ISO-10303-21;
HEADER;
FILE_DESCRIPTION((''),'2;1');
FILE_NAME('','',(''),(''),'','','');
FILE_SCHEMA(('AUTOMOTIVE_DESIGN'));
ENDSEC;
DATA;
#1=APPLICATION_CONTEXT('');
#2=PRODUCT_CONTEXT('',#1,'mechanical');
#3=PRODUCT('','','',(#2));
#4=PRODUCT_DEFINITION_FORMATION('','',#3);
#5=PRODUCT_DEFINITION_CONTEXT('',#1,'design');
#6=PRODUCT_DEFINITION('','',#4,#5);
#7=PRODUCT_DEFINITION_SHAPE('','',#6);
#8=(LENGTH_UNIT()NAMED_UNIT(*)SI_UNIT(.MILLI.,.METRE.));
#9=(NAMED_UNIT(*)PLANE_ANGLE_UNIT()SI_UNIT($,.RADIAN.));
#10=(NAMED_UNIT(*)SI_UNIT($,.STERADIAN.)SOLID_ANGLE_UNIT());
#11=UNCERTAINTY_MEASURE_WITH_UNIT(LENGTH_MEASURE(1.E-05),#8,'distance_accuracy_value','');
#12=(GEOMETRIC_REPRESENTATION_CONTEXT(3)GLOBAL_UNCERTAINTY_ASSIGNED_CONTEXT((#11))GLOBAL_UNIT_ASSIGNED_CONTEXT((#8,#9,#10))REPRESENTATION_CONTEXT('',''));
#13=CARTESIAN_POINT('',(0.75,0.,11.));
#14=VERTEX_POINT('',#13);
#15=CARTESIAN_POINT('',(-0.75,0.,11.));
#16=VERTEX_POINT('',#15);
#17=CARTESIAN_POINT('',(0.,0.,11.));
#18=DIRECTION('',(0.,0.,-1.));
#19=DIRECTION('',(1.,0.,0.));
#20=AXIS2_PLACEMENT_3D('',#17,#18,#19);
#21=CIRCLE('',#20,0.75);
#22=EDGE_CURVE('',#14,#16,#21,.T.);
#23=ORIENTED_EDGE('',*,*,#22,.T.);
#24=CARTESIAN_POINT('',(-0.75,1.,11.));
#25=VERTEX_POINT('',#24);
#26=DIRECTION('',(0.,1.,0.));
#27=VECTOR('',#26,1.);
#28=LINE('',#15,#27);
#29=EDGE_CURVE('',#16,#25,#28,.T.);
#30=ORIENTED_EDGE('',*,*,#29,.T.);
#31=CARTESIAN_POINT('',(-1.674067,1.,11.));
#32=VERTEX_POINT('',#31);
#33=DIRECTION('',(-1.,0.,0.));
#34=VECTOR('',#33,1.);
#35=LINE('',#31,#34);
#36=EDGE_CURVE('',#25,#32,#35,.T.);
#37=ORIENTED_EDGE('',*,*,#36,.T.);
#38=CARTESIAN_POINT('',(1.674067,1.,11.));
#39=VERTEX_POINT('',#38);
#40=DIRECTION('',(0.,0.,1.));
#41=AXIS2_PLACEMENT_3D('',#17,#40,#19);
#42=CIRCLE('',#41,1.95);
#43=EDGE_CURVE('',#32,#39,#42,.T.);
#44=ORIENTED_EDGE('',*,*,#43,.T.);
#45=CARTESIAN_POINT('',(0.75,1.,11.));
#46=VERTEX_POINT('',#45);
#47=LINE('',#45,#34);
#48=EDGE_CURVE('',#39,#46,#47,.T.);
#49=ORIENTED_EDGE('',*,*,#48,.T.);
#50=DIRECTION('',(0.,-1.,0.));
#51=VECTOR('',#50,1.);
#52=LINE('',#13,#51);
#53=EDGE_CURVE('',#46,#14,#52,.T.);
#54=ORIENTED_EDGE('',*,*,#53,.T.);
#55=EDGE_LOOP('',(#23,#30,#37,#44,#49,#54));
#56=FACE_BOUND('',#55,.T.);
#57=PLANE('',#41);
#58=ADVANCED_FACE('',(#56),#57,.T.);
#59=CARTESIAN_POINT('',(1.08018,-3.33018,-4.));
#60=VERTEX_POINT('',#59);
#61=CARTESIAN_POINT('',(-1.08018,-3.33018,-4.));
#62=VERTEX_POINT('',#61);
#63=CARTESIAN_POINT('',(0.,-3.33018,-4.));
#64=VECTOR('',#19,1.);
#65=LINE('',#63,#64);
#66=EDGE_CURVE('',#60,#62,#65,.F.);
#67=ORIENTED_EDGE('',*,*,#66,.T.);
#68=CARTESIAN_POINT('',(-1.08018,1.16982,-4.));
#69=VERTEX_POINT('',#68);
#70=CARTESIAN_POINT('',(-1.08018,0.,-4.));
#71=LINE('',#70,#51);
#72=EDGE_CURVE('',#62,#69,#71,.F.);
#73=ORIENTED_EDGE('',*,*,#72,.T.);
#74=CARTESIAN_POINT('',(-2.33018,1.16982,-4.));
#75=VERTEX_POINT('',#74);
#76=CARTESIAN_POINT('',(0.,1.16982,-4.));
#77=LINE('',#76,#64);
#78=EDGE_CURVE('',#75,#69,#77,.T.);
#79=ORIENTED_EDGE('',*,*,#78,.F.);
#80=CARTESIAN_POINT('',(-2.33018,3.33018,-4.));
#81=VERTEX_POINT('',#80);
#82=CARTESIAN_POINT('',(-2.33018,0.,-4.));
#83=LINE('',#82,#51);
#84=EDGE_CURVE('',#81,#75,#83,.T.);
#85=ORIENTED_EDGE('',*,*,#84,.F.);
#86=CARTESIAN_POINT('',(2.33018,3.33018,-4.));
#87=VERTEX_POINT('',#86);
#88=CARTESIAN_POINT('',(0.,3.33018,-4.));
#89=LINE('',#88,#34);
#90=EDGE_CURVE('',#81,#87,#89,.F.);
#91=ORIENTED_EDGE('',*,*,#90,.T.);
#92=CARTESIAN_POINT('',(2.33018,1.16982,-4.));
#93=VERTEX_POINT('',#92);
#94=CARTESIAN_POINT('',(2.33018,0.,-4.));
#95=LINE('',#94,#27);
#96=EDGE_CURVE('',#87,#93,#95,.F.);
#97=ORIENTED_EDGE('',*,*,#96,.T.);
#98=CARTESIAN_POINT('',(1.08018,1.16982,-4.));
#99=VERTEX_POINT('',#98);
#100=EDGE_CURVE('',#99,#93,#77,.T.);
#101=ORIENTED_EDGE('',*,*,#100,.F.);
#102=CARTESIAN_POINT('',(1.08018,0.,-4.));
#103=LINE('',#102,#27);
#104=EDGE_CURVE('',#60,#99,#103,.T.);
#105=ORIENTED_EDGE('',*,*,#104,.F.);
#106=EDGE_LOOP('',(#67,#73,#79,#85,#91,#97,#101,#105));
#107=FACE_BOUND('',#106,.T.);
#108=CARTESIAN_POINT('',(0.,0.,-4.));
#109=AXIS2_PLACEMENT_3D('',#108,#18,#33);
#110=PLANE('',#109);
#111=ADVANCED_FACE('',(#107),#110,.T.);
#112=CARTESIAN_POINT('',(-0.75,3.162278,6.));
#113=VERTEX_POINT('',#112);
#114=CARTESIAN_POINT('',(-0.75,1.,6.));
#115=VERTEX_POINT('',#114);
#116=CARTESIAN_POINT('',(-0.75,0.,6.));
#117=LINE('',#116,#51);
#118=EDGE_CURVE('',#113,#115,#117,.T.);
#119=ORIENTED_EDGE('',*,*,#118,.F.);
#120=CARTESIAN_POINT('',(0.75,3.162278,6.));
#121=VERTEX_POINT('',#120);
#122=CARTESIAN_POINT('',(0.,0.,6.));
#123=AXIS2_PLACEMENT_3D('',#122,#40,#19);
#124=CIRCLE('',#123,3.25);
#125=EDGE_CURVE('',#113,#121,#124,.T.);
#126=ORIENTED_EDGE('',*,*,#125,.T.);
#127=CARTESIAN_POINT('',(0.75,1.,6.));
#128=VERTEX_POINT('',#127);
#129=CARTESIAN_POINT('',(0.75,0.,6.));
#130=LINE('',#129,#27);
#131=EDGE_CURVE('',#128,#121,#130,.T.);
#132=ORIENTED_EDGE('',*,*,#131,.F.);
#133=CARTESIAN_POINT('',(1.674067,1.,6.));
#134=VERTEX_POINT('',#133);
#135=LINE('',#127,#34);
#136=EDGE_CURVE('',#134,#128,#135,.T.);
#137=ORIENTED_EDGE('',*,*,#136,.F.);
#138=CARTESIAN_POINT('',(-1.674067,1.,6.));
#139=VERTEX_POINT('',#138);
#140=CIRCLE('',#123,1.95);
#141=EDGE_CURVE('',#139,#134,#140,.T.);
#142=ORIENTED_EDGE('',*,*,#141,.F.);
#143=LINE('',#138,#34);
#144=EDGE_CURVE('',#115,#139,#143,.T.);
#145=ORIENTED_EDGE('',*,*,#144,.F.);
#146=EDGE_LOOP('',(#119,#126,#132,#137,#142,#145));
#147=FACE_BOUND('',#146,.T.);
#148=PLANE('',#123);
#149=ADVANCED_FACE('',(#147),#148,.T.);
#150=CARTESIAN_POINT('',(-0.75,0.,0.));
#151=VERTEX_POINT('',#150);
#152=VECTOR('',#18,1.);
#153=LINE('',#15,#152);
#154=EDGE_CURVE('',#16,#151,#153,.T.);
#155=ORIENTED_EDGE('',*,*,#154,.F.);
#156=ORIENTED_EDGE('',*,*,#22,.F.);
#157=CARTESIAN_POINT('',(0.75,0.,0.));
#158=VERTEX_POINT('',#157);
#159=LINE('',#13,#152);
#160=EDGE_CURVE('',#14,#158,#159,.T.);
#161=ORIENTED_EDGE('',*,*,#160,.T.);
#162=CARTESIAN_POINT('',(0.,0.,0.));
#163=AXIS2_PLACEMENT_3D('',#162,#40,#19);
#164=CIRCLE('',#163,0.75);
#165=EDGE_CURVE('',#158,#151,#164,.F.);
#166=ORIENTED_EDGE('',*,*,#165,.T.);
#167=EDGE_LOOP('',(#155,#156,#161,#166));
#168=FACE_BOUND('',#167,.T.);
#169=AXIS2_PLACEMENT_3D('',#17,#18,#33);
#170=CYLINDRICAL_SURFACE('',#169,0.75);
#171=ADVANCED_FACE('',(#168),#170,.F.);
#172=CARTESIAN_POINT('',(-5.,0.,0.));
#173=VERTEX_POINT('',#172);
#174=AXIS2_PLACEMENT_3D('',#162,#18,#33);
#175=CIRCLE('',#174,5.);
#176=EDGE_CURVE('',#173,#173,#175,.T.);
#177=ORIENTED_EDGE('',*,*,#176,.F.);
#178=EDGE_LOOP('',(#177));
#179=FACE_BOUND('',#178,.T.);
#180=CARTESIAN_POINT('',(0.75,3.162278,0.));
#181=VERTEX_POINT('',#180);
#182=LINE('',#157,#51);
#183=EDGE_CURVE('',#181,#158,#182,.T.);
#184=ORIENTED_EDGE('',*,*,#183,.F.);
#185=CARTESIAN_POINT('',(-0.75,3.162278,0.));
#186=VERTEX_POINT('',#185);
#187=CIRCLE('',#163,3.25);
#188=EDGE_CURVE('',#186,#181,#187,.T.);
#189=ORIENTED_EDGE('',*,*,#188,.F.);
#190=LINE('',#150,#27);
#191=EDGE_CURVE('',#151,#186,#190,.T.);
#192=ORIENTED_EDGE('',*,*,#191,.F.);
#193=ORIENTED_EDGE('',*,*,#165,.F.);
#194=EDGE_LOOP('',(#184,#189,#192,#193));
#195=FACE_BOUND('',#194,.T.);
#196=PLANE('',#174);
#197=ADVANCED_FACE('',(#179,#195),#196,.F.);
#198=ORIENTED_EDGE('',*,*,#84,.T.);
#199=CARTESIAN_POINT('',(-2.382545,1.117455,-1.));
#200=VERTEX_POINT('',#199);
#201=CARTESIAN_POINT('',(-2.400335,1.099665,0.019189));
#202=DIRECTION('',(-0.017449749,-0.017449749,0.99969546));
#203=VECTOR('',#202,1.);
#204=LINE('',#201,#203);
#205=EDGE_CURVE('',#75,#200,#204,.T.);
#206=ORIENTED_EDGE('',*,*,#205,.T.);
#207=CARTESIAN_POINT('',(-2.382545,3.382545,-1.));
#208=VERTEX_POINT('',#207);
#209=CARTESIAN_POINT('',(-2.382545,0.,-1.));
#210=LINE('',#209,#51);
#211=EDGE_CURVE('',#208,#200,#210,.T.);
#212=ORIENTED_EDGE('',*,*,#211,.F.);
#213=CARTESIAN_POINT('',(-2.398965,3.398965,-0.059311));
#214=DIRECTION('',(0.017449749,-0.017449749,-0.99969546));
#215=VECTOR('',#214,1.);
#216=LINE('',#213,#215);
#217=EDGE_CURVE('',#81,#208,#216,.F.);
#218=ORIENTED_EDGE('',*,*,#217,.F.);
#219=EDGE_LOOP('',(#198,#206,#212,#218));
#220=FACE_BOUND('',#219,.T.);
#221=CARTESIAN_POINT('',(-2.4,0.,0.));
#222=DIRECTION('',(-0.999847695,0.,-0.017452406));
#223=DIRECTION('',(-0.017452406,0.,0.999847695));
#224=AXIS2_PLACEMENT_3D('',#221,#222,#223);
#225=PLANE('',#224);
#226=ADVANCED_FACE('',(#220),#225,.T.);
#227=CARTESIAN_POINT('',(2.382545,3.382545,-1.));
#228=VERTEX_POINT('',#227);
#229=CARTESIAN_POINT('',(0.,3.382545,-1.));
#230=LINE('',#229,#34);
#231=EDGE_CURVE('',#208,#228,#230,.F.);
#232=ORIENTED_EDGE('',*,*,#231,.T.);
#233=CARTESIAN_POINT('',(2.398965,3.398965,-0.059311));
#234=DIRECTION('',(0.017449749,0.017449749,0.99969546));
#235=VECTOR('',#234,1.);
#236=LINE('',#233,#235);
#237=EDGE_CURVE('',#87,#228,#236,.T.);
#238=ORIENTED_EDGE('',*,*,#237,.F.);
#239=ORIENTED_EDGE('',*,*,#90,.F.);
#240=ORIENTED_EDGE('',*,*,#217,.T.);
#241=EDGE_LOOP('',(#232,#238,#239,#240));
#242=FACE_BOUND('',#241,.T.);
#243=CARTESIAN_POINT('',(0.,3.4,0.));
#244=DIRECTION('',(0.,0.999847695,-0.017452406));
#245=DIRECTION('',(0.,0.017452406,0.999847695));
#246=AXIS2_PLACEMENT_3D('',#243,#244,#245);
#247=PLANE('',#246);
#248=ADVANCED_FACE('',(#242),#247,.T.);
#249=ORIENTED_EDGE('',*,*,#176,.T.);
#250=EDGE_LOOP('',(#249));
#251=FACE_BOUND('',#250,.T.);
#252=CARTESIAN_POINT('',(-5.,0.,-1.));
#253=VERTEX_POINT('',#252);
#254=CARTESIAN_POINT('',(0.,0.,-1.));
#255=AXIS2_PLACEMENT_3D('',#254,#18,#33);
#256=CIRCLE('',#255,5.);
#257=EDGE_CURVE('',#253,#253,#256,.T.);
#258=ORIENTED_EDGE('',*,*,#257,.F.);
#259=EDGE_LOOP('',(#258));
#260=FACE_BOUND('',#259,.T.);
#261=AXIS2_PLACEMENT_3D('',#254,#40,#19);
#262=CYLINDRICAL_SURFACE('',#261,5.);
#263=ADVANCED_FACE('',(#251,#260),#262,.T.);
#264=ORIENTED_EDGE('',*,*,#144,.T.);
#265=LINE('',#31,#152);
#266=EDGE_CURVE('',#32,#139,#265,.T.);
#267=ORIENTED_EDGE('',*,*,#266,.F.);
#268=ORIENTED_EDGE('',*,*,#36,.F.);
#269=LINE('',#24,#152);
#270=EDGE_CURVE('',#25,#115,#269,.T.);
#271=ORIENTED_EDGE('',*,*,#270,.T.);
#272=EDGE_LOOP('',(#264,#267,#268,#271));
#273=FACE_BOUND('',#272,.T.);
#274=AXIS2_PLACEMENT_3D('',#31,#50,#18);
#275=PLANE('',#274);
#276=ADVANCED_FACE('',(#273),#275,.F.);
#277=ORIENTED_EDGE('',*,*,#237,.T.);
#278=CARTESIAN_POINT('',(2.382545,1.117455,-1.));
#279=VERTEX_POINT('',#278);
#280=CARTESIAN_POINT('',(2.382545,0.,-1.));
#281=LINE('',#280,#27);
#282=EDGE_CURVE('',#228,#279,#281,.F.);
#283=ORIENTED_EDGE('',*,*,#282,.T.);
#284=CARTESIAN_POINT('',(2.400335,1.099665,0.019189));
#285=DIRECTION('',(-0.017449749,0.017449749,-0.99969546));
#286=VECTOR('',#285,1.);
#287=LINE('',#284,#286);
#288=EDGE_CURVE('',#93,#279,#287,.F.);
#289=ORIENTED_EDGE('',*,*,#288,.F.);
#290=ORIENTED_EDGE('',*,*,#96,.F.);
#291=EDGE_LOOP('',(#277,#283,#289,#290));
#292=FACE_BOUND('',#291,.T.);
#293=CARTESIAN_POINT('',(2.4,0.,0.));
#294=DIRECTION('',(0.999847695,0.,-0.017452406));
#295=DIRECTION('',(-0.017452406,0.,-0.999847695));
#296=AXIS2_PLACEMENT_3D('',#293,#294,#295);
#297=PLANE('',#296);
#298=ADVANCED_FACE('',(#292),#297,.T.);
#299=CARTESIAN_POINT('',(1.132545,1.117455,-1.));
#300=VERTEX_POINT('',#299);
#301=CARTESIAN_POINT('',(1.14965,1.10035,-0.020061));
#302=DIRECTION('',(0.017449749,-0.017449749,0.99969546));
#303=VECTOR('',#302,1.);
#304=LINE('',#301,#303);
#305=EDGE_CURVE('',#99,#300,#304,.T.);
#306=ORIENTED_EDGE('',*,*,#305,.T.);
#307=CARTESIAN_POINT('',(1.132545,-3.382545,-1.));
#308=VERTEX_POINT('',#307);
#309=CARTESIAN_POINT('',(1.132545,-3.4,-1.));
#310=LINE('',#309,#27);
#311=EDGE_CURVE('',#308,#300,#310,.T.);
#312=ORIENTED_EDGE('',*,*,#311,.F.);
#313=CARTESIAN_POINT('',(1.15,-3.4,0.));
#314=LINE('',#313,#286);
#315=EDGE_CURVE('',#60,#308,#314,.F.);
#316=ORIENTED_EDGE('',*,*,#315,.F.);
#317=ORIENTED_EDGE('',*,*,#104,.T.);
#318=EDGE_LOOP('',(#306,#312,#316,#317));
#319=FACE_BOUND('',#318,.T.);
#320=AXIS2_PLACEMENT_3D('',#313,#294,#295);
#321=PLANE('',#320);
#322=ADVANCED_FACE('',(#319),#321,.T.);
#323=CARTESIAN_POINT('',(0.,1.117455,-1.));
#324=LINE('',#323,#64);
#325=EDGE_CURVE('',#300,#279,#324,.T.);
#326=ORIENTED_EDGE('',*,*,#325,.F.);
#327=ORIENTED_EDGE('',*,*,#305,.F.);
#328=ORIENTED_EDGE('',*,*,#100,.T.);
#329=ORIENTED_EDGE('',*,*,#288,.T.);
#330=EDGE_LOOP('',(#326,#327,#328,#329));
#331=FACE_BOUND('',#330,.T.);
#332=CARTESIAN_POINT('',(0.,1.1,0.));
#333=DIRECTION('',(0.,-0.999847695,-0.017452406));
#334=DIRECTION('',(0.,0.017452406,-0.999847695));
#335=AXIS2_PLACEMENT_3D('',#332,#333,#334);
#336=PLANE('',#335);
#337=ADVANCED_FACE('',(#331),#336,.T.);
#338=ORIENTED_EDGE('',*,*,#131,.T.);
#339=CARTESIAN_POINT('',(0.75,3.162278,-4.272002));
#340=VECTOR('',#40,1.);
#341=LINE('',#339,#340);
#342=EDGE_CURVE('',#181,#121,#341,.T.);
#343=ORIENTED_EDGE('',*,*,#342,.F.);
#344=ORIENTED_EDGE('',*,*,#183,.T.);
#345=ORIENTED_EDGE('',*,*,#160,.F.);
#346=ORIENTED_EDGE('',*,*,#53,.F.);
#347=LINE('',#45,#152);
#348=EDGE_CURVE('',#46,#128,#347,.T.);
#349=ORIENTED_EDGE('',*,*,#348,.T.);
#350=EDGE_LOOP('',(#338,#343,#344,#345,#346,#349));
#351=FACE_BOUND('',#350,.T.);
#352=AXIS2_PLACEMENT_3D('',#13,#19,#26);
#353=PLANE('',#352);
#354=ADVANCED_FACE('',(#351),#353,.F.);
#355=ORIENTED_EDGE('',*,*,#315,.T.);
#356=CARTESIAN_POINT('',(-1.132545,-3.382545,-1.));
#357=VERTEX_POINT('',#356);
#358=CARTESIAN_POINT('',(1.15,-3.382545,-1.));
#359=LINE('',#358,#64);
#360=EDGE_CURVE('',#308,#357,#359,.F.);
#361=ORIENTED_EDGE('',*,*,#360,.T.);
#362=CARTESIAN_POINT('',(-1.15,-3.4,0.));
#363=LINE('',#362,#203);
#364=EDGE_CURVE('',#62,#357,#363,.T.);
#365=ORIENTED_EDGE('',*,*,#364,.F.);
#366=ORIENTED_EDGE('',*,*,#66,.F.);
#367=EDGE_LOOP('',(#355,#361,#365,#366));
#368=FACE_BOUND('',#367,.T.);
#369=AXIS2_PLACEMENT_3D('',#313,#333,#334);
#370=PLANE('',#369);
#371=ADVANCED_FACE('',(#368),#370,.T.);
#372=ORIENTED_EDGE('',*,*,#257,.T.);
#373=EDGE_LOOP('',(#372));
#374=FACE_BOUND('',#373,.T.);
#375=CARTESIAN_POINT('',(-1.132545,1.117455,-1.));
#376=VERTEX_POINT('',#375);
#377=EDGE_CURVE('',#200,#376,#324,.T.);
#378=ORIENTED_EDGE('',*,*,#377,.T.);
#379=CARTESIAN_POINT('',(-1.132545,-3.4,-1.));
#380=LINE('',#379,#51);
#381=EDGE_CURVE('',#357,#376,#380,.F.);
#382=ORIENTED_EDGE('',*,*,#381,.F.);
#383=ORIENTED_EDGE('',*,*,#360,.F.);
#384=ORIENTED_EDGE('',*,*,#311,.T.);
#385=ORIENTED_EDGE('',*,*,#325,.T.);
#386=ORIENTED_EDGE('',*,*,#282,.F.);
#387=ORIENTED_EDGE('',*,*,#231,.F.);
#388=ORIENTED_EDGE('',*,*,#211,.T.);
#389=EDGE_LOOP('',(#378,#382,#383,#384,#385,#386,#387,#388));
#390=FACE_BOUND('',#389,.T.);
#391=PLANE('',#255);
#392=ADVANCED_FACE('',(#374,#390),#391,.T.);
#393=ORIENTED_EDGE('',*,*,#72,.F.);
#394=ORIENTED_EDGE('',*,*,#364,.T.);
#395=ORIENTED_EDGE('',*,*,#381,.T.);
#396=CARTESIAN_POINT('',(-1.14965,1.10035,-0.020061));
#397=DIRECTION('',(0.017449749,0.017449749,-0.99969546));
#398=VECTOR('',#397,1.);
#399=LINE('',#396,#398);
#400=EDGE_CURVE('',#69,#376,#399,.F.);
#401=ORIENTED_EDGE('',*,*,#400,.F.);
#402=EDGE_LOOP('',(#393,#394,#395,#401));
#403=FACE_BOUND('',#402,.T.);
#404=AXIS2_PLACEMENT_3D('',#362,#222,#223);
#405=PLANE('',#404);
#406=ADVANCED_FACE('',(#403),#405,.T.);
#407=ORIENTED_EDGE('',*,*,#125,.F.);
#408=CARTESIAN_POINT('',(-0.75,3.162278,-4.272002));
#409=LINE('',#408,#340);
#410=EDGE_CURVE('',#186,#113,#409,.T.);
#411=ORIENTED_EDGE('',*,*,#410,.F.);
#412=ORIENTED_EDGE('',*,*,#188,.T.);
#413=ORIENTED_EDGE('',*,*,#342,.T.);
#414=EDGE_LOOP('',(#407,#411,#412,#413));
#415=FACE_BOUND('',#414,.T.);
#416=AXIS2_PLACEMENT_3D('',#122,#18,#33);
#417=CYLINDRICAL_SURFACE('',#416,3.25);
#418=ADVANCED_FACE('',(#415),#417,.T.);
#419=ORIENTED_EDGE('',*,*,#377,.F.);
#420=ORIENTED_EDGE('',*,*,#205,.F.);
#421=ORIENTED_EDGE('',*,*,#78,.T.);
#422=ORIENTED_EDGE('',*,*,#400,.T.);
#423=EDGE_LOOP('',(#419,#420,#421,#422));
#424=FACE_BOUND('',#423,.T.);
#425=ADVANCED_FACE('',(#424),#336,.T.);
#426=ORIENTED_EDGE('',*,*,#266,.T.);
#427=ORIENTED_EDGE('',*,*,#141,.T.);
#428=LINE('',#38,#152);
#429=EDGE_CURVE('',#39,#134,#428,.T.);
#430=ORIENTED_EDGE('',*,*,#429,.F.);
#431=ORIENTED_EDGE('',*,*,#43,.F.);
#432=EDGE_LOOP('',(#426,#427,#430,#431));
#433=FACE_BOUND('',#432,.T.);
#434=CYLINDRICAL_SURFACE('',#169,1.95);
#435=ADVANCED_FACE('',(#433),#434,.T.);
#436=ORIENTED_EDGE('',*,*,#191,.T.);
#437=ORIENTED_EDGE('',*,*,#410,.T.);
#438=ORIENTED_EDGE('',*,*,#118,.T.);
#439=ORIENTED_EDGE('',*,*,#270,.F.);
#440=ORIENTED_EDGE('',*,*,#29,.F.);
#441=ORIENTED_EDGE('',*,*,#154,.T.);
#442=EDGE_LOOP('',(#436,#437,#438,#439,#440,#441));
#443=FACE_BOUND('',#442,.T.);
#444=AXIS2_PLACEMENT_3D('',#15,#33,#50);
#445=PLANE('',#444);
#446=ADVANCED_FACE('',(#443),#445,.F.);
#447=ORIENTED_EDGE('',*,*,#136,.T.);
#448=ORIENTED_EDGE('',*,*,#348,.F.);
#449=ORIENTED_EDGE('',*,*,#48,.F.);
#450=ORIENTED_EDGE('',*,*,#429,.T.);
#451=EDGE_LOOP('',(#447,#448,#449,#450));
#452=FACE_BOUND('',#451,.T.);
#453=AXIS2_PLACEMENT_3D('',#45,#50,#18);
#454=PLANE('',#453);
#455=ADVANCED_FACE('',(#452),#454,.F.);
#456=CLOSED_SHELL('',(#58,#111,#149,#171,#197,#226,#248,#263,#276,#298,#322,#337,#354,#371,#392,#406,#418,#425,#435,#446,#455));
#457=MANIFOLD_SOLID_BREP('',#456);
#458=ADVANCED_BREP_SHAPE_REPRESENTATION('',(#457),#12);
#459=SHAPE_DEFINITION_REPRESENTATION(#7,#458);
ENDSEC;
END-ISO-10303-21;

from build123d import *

# Parameters (mm, degrees)
STOCK_5_GEAR_5_OUTPUT_GEAR_32TEETH_0_5M_DEPTH = 6
STOCK_5_GEAR_START                            = 6
STOCK_5_GEAR_5_OUTPUT_GEAR_32TEETH_3_DEPTH    = 5
SKETCH1_W                                     = 2.3
SKETCH1_H                                     = 6.8
BOSS_EXTRUDE1_DEPTH                           = 4
BOSS_EXTRUDE1_DRAFT                           = 1
SKETCH1_W_2                                   = 4.8
SKETCH1_H_2                                   = 2.3
BOSS_EXTRUDE1_PROFILE_2_DEPTH                 = 4
BOSS_EXTRUDE1_PROFILE_2_DRAFT                 = 1
SKETCH2_R                                     = 5
BOSS_EXTRUDE2_DEPTH                           = 1


# Read off the part's stored shape, not the designer's step: Stock-5_Gear 5__Output Gear_32Teeth_0.5Modulus-1
with BuildPart() as part:
    # Stock-5_Gear 5__Output Gear_32Teeth_ 2 → Stock-5_Gear 5__Output Gear_32Teeth_0.5Modulus-1 (new body)
    with BuildSketch(Plane.XY):
        with BuildLine():
            ThreePointArc((-0.75, 3.16227766), (0, -3.25), (0.75, 3.16227766))
            Line((0.75, 3.16227766), (0.75, 0))
            ThreePointArc((0.75, 0), (0, -0.75), (-0.75, 0))
            Line((-0.75, 0), (-0.75, 3.16227766))
        make_face()
    extrude(amount=STOCK_5_GEAR_5_OUTPUT_GEAR_32TEETH_0_5M_DEPTH)

    # Stock-5_Gear 5__Output Gear_32Teeth_ 3 o → Stock-5_Gear 5__Output Gear_32Teeth_ 3 (add)
    with BuildSketch(Plane.XY.offset(STOCK_5_GEAR_START)):
        with BuildLine():
            Line((1.674066904, 1), (0.75, 1))
            Line((0.75, 1), (0.75, 0))
            ThreePointArc((0.75, 0), (0, -0.75), (-0.75, 0))
            Line((-0.75, 0), (-0.75, 1))
            Line((-0.75, 1), (-1.674066904, 1))
            ThreePointArc((-1.674066904, 1), (0, -1.95), (1.674066904, 1))
        make_face()
    extrude(amount=STOCK_5_GEAR_5_OUTPUT_GEAR_32TEETH_3_DEPTH)


with BuildPart() as boss_extrude1_tool:
    # Sketch1 → Boss-Extrude1 (with draft: the straight prism first)
    with BuildSketch(Plane(origin=(0, 0, 0), x_dir=(-1, 0, 0), z_dir=(0, 0, -1))):
        Rectangle(SKETCH1_W, SKETCH1_H)
    extrude(amount=BOSS_EXTRUDE1_DEPTH)
    # Boss-Extrude1: the draft: its side faces are tilted about the plane it starts from
    boss_extrude1_sides = [boss_extrude1_tool.faces().sort_by_distance(p)[0] for p in [
        (0, -3.4, -2),
        (-1.15, 0, -2),
        (0, 3.4, -2),
        (1.15, 0, -2),
    ]]
    draft(boss_extrude1_sides, Plane(origin=(0, 0, 0), x_dir=(-1, 0, 0), z_dir=(0, 0, -1)), BOSS_EXTRUDE1_DRAFT)


with BuildPart() as part_1:
    add(part.part)

    # Boss-Extrude1: add boss_extrude1_tool
    add(boss_extrude1_tool.part)


with BuildPart() as boss_extrude1_profile_2_tool:
    # Sketch1 → Boss-Extrude1 profile 2 (with draft: the straight prism first)
    with BuildSketch(Plane(origin=(0, 0, 0), x_dir=(-1, 0, 0), z_dir=(0, 0, -1))):
        with Locations((0, 2.25)):
            Rectangle(SKETCH1_W_2, SKETCH1_H_2)
    extrude(amount=BOSS_EXTRUDE1_PROFILE_2_DEPTH)
    # Boss-Extrude1 profile 2: the draft: its side faces are tilted about the plane it starts from
    boss_extrude1_profile_2_sides = [boss_extrude1_profile_2_tool.faces().sort_by_distance(p)[0] for p in [
        (0, 3.4, -2),
        (2.4, 2.25, -2),
        (0, 1.1, -2),
        (-2.4, 2.25, -2),
    ]]
    draft(boss_extrude1_profile_2_sides, Plane(origin=(0, 0, 0), x_dir=(-1, 0, 0), z_dir=(0, 0, -1)), BOSS_EXTRUDE1_PROFILE_2_DRAFT)


with BuildPart() as part_2:
    add(part_1.part)

    # Boss-Extrude1 profile 2: add boss_extrude1_profile_2_tool
    add(boss_extrude1_profile_2_tool.part)

    # Sketch2 → Boss-Extrude2 (add)
    with BuildSketch(Plane(origin=(0, 0, 0), x_dir=(-1, 0, 0), z_dir=(0, 0, -1))):
        Circle(SKETCH2_R)
    extrude(amount=BOSS_EXTRUDE2_DEPTH)


solid = part_2.part
